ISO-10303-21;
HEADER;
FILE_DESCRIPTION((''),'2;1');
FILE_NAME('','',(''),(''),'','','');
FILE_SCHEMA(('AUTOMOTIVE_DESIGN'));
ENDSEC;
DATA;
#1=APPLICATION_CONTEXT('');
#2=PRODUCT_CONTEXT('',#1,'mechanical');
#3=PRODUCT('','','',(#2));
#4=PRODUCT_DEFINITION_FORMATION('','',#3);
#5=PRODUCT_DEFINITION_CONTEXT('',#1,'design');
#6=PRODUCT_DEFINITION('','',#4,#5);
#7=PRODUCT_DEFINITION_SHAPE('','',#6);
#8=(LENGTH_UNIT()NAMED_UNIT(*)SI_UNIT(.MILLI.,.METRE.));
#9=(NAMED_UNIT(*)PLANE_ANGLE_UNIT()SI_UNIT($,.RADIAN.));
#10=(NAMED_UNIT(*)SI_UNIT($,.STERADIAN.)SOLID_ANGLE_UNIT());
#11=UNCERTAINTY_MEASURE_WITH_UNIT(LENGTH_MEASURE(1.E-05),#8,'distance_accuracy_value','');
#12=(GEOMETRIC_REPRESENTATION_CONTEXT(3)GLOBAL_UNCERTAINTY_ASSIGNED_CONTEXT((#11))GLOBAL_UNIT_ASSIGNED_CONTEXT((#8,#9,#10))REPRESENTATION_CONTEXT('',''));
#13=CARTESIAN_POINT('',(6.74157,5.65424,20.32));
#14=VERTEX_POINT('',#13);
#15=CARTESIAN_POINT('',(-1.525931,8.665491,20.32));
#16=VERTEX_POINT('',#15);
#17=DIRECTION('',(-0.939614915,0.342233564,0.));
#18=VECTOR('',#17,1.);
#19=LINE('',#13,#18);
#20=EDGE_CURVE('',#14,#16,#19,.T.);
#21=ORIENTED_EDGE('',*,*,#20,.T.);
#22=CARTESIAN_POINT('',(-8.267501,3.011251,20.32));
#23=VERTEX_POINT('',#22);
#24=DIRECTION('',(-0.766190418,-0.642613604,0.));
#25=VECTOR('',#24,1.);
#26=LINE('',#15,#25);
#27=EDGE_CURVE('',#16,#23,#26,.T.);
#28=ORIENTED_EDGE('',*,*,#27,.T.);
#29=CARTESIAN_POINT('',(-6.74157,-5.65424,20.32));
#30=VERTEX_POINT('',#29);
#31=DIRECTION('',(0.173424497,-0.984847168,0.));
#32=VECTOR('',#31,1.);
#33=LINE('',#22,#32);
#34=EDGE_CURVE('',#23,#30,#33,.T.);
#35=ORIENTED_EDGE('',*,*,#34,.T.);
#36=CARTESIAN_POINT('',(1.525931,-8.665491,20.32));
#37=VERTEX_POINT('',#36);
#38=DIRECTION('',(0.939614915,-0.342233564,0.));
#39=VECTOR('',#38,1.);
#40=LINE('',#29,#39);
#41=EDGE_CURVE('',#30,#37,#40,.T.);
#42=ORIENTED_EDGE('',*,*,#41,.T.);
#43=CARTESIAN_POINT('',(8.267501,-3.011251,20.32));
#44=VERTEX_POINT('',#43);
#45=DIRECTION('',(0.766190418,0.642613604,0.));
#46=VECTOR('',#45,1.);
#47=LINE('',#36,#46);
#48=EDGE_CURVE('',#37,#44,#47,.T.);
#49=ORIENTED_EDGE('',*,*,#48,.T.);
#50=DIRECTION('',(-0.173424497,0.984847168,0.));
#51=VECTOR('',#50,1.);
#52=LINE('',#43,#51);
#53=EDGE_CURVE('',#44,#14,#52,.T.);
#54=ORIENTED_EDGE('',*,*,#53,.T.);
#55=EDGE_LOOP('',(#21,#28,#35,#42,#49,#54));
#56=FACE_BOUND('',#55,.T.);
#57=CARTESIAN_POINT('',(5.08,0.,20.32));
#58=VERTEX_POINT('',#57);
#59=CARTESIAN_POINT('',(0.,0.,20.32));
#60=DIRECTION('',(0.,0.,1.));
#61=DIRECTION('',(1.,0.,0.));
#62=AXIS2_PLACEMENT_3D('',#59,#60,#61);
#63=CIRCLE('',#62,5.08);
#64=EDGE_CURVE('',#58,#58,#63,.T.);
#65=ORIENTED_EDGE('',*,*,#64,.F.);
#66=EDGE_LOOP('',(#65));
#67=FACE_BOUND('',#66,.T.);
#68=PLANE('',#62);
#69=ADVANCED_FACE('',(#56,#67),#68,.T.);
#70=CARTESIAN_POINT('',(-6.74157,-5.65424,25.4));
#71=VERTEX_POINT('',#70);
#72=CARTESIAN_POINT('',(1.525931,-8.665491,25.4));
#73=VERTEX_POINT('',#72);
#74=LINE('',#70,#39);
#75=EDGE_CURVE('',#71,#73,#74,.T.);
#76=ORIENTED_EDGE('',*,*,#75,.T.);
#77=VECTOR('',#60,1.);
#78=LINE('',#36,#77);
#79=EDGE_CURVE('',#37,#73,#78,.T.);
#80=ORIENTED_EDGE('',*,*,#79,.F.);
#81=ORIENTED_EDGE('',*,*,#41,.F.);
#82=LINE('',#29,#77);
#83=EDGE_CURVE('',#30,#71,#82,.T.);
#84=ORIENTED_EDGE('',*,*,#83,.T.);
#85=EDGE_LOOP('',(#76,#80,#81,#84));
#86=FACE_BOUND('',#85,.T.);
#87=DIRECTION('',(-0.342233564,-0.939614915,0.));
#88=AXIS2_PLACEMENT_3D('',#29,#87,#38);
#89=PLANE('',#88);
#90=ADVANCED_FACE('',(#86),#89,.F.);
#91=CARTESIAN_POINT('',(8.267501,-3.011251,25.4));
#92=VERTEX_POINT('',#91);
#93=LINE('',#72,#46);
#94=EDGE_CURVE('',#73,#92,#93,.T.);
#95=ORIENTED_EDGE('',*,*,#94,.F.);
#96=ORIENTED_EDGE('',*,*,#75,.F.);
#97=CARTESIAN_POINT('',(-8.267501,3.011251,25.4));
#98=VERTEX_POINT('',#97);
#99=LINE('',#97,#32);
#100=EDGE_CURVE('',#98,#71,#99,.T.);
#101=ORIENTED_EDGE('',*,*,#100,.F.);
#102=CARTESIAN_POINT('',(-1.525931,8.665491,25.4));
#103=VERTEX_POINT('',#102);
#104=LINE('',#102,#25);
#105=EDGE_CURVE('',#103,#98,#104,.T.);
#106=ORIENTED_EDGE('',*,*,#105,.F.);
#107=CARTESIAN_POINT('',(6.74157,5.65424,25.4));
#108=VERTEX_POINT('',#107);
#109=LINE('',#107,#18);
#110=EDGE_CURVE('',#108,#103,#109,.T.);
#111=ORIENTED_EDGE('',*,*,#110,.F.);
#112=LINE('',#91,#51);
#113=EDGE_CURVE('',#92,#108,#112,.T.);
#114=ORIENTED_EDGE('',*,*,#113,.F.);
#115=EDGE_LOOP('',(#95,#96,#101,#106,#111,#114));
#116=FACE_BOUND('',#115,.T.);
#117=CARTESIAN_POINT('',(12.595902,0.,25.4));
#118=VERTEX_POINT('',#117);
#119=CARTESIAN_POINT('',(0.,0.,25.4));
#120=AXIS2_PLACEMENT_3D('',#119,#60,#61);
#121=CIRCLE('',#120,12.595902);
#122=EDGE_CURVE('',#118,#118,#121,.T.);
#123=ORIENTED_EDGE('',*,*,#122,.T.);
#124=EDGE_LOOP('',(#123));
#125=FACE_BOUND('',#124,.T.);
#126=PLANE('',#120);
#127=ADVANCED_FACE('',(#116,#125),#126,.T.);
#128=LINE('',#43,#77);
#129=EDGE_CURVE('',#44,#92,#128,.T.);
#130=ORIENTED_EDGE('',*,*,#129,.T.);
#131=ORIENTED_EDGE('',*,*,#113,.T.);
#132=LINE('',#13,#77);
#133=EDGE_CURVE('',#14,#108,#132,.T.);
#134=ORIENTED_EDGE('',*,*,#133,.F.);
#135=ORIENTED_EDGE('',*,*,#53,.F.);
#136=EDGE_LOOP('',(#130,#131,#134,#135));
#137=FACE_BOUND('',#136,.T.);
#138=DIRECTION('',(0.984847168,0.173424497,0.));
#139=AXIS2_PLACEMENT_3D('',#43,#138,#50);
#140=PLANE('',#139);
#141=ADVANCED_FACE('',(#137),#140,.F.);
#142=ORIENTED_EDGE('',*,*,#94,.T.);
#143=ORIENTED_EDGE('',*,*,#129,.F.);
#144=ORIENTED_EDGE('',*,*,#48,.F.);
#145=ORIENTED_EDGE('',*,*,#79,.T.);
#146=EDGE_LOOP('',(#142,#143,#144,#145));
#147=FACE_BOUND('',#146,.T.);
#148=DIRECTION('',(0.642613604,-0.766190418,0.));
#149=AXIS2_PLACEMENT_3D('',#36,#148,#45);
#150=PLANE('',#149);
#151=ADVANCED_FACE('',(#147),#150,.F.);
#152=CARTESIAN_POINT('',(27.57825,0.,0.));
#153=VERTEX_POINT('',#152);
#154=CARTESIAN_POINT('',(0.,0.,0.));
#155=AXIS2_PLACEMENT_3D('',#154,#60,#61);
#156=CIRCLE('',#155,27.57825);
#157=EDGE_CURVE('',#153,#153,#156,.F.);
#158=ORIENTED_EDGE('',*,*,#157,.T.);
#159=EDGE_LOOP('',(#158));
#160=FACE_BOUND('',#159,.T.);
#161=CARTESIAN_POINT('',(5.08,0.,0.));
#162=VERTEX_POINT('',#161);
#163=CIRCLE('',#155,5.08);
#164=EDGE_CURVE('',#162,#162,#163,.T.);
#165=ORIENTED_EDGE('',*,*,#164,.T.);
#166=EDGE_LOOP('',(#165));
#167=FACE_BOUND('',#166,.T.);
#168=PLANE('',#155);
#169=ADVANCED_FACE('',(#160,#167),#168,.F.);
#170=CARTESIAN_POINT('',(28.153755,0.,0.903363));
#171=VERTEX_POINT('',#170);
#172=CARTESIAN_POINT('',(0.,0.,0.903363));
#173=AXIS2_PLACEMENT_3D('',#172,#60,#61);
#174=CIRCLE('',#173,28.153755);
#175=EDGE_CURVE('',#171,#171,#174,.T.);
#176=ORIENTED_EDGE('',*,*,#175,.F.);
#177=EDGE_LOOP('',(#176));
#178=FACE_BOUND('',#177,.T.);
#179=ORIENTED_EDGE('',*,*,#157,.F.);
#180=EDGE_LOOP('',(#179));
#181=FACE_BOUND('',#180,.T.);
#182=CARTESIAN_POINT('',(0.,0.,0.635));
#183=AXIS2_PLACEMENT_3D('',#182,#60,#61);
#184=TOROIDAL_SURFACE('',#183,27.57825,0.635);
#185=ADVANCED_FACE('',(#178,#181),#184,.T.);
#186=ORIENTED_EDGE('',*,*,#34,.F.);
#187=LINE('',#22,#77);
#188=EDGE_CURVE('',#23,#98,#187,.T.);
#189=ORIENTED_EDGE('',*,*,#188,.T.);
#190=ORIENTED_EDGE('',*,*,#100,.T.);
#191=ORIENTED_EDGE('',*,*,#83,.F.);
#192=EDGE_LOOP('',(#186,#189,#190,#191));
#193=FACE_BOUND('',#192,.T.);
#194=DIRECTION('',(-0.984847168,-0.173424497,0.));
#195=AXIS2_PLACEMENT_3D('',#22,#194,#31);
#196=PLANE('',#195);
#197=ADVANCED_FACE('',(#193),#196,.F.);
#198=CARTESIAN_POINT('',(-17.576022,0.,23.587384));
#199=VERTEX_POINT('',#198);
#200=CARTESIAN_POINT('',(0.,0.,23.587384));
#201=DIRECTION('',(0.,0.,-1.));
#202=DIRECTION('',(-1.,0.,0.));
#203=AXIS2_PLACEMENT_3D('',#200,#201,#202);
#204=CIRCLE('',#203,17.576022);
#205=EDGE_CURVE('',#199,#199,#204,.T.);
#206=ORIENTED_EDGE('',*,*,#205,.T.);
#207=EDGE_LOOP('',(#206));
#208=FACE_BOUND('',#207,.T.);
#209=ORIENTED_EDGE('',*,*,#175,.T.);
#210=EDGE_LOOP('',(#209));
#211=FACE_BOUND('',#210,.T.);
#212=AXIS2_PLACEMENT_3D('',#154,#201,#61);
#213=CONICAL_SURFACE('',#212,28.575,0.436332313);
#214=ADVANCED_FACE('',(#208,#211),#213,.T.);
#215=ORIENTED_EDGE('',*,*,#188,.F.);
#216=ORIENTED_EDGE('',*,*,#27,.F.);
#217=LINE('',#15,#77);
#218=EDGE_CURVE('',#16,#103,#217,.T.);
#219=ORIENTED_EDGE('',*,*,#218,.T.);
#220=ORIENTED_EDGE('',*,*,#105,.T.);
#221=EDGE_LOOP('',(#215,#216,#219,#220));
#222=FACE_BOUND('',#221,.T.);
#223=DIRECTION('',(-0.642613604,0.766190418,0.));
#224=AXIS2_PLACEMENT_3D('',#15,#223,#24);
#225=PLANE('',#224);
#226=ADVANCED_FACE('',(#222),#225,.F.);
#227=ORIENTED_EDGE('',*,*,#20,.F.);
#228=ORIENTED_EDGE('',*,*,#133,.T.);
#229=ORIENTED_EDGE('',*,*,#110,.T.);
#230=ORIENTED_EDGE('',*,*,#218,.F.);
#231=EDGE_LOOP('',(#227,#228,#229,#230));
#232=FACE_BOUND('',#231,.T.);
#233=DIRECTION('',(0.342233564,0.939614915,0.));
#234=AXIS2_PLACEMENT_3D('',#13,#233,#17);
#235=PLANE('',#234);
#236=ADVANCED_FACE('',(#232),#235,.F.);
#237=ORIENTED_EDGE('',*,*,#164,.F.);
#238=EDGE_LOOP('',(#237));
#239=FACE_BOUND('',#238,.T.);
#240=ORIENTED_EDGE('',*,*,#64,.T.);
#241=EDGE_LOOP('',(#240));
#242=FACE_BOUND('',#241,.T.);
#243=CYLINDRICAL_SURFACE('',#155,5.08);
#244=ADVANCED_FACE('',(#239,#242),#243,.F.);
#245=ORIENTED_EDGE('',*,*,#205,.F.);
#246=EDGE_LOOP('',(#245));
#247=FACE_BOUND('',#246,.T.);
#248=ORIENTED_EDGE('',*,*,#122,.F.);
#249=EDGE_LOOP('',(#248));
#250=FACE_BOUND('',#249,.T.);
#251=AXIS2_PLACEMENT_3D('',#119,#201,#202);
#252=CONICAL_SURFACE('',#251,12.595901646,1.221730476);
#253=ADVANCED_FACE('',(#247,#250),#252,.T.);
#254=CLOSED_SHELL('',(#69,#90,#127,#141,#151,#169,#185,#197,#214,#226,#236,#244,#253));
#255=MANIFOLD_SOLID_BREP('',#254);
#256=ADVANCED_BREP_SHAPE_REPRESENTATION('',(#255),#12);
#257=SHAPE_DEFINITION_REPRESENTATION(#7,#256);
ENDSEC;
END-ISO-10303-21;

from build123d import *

# Parameters (mm, degrees)
SKETCH1_R          = 28.575
CONE_EXTRUDE_DEPTH = 25.4
CONE_EXTRUDE_TAPER = 25
CHAMFER1_SIZE      = 2
CHAMFER1_SIZE_2    = 4.134883836
NUT_HOLE_CUT_DEPTH = 5.08
SKETCH4_R          = 5.08
CUT_EXTRUDE2_DEPTH = 46.232329699
FILLET2_R          = 0.635


with BuildPart() as part:
    # Sketch1 → Cone Extrude (new body)
    with BuildSketch(Plane.XY):
        Circle(SKETCH1_R)
    extrude(amount=CONE_EXTRUDE_DEPTH, taper=CONE_EXTRUDE_TAPER)

    # Chamfer1
    # the kernel refuses this chamfer: 4.134883836, 2 mm, written as the material it takes off along each edge
    with BuildSketch(Plane(origin=(0, 0, 25.4), x_dir=(1, 0, 0), z_dir=(0, 1, 0))) as chamfer1_piece_1:
        Polygon((16.730785483 + CHAMFER1_SIZE * 0.422618261741, CHAMFER1_SIZE * 0.906307787037), (16.730785483 - CHAMFER1_SIZE_2, 0), (16.730785483, 0), align=None)
    revolve(axis=Axis((0, 0, 25.4), (0, 0, -1)), mode=Mode.SUBTRACT)

    # Sketch3 → Nut Hole Cut (cut)
    with BuildSketch(Plane.XY.offset(25.4)):
        Polygon((6.741570116, 5.654240212), (-1.525930605, 8.665491088), (-8.267500721, 3.011250876), (-6.741570116, -5.654240212), (1.525930605, -8.665491088), (8.267500721, -3.011250876), align=None)
    extrude(amount=-NUT_HOLE_CUT_DEPTH, mode=Mode.SUBTRACT)

    # Sketch4 → Cut-Extrude2 (cut, through all)
    with BuildSketch(Plane.XY.offset(20.32)):
        Circle(SKETCH4_R)
    extrude(amount=-CUT_EXTRUDE2_DEPTH, mode=Mode.SUBTRACT)

    # Fillet2
    fillet2_edges = [part.edges().sort_by_distance(p)[0] for p in [
        (-28.575, 0, 0),
    ]]
    fillet(fillet2_edges, radius=FILLET2_R)


solid = part.part
